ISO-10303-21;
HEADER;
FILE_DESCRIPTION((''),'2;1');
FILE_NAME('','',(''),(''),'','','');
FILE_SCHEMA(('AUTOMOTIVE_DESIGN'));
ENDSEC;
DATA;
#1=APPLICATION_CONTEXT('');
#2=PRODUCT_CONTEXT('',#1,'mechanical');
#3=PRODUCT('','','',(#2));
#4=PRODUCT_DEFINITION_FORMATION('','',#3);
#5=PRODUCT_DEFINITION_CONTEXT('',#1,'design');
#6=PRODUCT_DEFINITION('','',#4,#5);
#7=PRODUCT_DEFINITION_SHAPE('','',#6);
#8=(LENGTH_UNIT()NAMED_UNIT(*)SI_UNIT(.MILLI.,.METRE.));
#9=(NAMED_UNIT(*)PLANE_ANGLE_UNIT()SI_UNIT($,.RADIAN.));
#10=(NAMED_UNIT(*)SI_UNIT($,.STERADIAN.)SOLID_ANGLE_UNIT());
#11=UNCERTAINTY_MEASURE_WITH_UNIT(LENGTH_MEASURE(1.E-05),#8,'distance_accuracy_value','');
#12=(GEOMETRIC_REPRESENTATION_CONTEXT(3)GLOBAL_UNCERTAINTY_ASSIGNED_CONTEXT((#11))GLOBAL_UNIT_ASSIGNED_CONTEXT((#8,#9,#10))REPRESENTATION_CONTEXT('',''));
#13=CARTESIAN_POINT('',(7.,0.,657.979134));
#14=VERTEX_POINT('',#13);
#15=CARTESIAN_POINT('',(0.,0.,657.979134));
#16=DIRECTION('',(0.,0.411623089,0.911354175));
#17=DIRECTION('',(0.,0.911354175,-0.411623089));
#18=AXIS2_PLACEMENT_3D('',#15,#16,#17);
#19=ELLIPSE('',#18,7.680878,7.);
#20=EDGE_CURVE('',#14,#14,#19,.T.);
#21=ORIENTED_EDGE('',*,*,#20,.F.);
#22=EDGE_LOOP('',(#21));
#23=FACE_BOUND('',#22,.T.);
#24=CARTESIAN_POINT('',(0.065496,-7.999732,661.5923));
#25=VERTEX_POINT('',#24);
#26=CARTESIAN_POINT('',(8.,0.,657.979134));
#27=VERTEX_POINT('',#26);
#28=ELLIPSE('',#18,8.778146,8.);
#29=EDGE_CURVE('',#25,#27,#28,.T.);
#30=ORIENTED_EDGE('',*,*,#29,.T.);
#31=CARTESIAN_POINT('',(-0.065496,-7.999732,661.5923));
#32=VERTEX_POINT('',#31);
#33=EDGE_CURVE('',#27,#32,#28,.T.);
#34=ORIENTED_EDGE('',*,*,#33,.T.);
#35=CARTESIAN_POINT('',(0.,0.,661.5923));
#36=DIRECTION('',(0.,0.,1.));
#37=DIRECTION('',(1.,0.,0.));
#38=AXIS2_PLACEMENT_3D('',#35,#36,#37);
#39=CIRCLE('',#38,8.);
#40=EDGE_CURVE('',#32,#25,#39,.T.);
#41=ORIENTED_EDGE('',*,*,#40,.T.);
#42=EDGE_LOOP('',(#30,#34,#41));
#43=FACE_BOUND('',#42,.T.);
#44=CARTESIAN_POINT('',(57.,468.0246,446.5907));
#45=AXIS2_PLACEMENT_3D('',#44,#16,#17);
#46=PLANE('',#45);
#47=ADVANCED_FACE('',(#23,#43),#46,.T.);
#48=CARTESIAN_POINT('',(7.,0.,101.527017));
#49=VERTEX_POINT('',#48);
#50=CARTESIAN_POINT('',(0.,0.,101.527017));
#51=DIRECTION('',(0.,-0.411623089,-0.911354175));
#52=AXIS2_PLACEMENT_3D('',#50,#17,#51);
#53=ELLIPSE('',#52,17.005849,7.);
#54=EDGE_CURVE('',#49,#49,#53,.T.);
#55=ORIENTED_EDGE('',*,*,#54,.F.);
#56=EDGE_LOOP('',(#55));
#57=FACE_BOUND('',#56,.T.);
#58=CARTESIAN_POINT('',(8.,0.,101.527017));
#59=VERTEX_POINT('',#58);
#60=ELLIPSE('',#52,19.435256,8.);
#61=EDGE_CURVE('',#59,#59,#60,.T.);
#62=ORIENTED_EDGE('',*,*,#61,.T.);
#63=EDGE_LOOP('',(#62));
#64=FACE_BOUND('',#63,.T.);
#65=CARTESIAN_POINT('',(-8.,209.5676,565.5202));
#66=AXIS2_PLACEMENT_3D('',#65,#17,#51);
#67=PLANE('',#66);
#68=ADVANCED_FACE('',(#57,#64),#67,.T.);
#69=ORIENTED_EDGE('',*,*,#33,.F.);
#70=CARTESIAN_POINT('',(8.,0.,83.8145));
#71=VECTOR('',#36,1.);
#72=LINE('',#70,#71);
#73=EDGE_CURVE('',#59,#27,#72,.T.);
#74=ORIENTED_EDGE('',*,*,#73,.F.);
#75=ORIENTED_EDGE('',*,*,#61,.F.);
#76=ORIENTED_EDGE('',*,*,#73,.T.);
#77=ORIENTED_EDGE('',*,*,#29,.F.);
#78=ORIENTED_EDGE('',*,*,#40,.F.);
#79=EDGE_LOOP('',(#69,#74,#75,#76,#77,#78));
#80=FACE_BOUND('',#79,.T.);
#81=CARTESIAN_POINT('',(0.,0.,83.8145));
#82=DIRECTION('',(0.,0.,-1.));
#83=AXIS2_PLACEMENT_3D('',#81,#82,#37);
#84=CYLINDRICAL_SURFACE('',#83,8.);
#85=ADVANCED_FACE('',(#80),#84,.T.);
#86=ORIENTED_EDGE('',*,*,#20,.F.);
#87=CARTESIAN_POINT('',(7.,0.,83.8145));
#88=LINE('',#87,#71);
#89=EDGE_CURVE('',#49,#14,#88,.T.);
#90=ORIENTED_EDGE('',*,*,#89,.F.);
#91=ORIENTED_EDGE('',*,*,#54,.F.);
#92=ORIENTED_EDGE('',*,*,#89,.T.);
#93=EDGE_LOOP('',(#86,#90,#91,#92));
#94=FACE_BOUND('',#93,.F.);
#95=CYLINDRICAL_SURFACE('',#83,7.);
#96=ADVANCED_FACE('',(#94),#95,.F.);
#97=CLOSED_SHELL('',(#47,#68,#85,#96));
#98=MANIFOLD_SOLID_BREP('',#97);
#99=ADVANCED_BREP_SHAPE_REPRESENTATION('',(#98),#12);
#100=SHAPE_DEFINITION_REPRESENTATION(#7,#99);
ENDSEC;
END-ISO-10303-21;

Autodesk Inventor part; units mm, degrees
ref_plane "Начальная плоскость" through (0, 0, 83.8145) normal (0, 0, 1) x (1, 0, 0)
ref_plane "Конечная плоскость" through (0, 0, 661.5924) normal (0, 0, 1) x (1, 0, 0)
sketch "Эскиз" plane through (0, 0, 0) normal (0, 0, 1) x (1, 0, 0)
  circle A0 centre (0, 0) radius 7
  circle A1 centre (0, 0) radius 8
  dimension "d0" = 16
  dimension "d1" = 1
extrude "Тело" add sketch "Эскиз" along normal up to surface (577.7778 mm away) from surface at 83.8145
sketch "Sketch3" plane through (0, 0, 0) normal (0, 0, 1) x (1, 0, 0)
  line L0 (0, 0) -> (10, 0)
ref_plane "Work Plane3" through (0, 0, 0) normal (0, -1, 0) x (1, 0, 0)
sketch "Sketch4" plane through (0, 0, 0) normal (0, -1, 0) x (1, 0, 0)
  line L0 (-2, 83.8145) -> (12, 83.8145)
  line L1 (-2, 661.5924) -> (12, 661.5924)
  dimension "d7" = 577.7778
ref_plane "РабПлоскость4" through (-8, 209.5676, 565.5202) normal (0, 0.9113542, -0.4116231) x (1, 0, 0)
split "Разделение1" plane through (-8, 209.5676, 565.5202) removes the side toward (0, 0.9113542, -0.4116231)
ref_plane "РабПлоскость5" through (57, 468.0246, 446.5907) normal (0, 0.4116231, 0.9113542) x (1, 0, 0)
split "Разделение2" plane through (57, 468.0246, 446.5907) removes the side toward (0, 0.4116231, 0.9113542)
equation "\"d0\" = G_H"
equation "\"d1\" = G_T"
equation "\"d2\" = G_L"
equation "\"G_H\" = 16"
equation "\"G_T\" = 1"
equation "\"G_L\" = d7"
equation "\"G_OFFSET_START\" = -83.81455"
equation "\"G_OFFSET_END\" = -2.19454"
equation "\"d4\" = -G_OFFSET_START"
equation "\"d5\" = G_OFFSET_END + B_L"
equation "\"B_L\" = 663.78693"
properties part number "Труба 16x1-577,78 ГОСТ 10704-91" material "Сталь, мягкая"
